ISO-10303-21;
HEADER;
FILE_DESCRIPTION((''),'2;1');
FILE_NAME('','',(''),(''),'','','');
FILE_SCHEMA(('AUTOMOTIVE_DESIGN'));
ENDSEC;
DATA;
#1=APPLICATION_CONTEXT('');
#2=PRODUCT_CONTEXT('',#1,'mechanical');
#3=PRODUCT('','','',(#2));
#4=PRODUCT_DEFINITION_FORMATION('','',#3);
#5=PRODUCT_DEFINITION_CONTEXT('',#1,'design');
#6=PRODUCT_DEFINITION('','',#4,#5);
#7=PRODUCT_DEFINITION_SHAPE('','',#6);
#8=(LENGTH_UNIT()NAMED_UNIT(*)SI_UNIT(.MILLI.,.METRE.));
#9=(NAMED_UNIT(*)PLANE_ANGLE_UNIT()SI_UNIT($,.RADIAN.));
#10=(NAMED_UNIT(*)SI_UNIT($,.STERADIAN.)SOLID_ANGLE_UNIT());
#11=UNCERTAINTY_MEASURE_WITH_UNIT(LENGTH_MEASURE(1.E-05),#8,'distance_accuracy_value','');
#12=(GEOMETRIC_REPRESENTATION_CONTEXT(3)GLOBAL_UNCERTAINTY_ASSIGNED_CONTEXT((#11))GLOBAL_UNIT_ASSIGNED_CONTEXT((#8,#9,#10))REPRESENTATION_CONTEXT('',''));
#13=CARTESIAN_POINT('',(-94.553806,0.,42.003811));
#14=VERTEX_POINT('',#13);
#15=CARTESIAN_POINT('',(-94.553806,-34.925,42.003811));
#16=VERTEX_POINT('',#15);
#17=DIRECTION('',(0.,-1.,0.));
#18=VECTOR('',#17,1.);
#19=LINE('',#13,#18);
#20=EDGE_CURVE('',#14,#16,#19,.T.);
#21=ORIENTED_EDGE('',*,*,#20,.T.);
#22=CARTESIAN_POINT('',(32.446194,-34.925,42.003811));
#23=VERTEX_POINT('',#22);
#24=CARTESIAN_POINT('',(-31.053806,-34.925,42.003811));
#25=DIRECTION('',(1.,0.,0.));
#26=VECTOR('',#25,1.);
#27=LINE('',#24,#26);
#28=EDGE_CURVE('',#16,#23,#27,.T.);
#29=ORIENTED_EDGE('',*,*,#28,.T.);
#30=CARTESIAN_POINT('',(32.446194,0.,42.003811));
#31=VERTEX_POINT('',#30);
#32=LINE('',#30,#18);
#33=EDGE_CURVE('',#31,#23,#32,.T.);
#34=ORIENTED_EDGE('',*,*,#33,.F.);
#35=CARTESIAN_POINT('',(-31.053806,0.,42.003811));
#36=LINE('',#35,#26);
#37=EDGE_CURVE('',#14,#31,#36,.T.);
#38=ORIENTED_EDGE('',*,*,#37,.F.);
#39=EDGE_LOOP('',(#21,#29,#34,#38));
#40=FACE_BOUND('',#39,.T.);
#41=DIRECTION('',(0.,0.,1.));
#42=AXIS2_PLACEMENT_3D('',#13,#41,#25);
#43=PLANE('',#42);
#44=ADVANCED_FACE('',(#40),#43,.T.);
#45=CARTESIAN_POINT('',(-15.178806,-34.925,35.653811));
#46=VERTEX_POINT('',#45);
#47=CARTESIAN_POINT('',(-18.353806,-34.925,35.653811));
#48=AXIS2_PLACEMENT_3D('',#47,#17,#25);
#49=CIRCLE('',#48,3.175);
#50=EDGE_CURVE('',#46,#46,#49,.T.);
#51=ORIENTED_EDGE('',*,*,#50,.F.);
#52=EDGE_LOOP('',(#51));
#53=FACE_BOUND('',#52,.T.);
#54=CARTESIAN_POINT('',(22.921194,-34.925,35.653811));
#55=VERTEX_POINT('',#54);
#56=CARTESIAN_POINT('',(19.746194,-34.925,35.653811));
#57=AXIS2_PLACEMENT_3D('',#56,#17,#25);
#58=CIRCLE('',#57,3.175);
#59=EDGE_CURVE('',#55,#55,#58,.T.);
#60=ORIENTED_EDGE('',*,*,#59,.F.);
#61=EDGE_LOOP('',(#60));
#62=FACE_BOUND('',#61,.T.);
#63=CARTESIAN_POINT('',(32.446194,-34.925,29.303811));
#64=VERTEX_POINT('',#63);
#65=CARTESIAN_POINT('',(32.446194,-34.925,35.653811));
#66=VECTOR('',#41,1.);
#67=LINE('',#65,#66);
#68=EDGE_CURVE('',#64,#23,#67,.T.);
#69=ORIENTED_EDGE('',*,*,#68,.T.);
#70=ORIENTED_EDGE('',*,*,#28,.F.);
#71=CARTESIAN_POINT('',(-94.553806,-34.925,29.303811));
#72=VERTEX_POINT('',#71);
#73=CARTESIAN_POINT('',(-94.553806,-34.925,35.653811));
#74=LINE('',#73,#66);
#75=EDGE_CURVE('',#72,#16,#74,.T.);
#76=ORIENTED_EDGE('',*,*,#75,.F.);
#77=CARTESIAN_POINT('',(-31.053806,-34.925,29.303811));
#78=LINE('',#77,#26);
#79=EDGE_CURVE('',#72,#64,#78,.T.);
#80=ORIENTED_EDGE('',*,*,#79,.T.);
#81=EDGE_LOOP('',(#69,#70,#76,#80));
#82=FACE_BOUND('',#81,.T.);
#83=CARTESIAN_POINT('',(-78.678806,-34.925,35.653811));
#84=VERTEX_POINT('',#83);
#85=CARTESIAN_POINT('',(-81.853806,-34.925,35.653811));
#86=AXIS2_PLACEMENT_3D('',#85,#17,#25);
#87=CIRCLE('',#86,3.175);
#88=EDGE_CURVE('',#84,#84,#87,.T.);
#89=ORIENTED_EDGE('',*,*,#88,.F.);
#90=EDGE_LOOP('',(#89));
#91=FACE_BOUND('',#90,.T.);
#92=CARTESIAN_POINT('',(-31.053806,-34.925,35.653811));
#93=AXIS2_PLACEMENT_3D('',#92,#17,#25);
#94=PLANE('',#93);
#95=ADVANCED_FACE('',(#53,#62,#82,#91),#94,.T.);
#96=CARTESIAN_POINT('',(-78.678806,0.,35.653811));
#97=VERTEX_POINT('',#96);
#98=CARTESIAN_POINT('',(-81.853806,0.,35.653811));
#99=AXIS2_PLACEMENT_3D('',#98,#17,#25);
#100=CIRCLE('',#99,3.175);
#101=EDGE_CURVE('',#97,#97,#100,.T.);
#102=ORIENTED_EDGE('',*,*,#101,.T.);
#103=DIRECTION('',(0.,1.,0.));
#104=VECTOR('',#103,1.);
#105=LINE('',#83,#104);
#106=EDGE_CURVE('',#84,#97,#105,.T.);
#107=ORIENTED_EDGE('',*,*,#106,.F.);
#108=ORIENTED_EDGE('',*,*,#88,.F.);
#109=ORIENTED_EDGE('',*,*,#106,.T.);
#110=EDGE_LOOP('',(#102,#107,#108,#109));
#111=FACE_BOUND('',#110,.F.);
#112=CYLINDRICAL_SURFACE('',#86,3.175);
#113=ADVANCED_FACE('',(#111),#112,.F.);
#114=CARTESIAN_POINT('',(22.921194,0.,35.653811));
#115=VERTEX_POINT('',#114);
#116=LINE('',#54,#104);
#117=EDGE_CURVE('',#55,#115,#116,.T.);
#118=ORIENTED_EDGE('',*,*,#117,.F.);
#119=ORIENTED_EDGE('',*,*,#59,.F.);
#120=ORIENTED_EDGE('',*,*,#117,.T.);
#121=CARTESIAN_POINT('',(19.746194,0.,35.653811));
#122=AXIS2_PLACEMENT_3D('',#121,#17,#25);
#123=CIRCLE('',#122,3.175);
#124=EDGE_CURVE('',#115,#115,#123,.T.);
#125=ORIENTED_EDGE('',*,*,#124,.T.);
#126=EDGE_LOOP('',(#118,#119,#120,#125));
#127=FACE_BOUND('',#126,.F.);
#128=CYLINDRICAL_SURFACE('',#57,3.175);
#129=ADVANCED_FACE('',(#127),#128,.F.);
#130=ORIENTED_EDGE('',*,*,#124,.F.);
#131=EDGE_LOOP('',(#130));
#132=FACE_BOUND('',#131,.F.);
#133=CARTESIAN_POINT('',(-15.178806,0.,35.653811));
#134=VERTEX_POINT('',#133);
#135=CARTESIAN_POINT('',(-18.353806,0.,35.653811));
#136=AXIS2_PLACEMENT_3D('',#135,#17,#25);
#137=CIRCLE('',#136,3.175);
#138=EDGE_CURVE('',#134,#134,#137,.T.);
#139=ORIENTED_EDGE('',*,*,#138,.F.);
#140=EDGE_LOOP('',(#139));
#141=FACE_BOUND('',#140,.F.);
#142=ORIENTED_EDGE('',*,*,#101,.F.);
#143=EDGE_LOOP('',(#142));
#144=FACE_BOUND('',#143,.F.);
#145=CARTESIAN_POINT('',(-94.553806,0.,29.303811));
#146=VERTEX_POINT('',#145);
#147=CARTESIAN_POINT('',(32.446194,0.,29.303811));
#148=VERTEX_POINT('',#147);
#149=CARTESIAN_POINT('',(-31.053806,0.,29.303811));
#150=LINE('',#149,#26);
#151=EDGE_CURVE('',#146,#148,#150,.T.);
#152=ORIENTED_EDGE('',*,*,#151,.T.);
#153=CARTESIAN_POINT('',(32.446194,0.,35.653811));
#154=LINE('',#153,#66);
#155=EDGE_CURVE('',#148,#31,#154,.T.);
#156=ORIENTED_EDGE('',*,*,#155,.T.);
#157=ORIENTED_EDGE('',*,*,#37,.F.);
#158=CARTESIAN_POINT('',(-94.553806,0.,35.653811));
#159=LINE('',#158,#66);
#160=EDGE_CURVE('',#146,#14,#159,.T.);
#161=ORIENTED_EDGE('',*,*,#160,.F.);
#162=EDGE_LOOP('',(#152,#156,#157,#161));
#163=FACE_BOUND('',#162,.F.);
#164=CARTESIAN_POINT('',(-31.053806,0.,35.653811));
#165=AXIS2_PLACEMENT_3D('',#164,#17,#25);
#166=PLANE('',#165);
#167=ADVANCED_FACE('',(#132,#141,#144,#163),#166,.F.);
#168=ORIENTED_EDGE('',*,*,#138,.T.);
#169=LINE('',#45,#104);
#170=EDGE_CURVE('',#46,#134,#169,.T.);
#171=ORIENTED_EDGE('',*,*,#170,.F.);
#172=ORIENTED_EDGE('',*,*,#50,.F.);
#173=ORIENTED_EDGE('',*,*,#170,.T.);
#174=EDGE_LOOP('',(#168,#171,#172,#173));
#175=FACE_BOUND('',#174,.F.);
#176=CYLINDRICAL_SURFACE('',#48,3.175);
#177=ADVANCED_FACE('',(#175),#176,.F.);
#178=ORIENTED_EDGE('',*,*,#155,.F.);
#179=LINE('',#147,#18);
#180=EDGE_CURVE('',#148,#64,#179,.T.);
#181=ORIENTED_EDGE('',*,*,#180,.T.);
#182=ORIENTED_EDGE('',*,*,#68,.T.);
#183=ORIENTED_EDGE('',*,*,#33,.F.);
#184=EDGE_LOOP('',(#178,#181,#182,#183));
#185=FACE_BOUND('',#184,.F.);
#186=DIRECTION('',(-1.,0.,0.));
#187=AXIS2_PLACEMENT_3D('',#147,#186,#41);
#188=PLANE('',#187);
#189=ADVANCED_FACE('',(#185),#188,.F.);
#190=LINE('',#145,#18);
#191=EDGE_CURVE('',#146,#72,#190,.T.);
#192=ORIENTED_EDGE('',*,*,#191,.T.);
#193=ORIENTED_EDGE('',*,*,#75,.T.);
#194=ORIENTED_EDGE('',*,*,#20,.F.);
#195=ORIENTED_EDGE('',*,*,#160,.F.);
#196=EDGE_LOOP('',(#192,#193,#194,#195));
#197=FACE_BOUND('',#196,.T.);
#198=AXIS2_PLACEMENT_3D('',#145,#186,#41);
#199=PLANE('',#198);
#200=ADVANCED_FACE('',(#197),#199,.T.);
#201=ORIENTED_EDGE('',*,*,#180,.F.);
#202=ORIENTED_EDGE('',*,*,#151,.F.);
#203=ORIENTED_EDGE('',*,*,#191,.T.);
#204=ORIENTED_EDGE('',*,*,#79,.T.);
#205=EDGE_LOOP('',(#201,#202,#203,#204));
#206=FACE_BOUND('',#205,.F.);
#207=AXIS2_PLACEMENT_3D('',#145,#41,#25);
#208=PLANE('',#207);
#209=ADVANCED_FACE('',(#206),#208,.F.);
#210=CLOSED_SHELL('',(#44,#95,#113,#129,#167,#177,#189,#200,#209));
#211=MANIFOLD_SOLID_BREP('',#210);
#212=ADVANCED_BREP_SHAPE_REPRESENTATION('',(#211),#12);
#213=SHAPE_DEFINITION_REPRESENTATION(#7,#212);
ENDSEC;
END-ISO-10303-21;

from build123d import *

# Parameters (mm, degrees)
F0_W     = 127
F0_H     = 12.7
F1_DEPTH = 34.925
F2_R     = 3.175
F3_DEPTH = 34.925


# Not quite as in the source:
# - a feature names something its author has since deleted; it is built from what else it names


with BuildPart() as f1:
    # F0 (on Front) → F1 (new body)
    with BuildSketch(Plane.XZ):
        with Locations((-31.0538060308, 35.6538111673)):
            Rectangle(F0_W, F0_H)
    extrude(amount=F1_DEPTH)

    # F2 (on face) → F3 (cut)
    with BuildSketch(Plane.XZ.offset(34.925)):
        with Locations((-81.8538060308, 35.6538111673)):
            Circle(F2_R)
        with Locations((-18.3538060308, 35.6538111673)):
            Circle(F2_R)
        with Locations((19.7461939692, 35.6538111673)):
            Circle(F2_R)
    extrude(amount=-F3_DEPTH, mode=Mode.SUBTRACT)


solid = f1.part
